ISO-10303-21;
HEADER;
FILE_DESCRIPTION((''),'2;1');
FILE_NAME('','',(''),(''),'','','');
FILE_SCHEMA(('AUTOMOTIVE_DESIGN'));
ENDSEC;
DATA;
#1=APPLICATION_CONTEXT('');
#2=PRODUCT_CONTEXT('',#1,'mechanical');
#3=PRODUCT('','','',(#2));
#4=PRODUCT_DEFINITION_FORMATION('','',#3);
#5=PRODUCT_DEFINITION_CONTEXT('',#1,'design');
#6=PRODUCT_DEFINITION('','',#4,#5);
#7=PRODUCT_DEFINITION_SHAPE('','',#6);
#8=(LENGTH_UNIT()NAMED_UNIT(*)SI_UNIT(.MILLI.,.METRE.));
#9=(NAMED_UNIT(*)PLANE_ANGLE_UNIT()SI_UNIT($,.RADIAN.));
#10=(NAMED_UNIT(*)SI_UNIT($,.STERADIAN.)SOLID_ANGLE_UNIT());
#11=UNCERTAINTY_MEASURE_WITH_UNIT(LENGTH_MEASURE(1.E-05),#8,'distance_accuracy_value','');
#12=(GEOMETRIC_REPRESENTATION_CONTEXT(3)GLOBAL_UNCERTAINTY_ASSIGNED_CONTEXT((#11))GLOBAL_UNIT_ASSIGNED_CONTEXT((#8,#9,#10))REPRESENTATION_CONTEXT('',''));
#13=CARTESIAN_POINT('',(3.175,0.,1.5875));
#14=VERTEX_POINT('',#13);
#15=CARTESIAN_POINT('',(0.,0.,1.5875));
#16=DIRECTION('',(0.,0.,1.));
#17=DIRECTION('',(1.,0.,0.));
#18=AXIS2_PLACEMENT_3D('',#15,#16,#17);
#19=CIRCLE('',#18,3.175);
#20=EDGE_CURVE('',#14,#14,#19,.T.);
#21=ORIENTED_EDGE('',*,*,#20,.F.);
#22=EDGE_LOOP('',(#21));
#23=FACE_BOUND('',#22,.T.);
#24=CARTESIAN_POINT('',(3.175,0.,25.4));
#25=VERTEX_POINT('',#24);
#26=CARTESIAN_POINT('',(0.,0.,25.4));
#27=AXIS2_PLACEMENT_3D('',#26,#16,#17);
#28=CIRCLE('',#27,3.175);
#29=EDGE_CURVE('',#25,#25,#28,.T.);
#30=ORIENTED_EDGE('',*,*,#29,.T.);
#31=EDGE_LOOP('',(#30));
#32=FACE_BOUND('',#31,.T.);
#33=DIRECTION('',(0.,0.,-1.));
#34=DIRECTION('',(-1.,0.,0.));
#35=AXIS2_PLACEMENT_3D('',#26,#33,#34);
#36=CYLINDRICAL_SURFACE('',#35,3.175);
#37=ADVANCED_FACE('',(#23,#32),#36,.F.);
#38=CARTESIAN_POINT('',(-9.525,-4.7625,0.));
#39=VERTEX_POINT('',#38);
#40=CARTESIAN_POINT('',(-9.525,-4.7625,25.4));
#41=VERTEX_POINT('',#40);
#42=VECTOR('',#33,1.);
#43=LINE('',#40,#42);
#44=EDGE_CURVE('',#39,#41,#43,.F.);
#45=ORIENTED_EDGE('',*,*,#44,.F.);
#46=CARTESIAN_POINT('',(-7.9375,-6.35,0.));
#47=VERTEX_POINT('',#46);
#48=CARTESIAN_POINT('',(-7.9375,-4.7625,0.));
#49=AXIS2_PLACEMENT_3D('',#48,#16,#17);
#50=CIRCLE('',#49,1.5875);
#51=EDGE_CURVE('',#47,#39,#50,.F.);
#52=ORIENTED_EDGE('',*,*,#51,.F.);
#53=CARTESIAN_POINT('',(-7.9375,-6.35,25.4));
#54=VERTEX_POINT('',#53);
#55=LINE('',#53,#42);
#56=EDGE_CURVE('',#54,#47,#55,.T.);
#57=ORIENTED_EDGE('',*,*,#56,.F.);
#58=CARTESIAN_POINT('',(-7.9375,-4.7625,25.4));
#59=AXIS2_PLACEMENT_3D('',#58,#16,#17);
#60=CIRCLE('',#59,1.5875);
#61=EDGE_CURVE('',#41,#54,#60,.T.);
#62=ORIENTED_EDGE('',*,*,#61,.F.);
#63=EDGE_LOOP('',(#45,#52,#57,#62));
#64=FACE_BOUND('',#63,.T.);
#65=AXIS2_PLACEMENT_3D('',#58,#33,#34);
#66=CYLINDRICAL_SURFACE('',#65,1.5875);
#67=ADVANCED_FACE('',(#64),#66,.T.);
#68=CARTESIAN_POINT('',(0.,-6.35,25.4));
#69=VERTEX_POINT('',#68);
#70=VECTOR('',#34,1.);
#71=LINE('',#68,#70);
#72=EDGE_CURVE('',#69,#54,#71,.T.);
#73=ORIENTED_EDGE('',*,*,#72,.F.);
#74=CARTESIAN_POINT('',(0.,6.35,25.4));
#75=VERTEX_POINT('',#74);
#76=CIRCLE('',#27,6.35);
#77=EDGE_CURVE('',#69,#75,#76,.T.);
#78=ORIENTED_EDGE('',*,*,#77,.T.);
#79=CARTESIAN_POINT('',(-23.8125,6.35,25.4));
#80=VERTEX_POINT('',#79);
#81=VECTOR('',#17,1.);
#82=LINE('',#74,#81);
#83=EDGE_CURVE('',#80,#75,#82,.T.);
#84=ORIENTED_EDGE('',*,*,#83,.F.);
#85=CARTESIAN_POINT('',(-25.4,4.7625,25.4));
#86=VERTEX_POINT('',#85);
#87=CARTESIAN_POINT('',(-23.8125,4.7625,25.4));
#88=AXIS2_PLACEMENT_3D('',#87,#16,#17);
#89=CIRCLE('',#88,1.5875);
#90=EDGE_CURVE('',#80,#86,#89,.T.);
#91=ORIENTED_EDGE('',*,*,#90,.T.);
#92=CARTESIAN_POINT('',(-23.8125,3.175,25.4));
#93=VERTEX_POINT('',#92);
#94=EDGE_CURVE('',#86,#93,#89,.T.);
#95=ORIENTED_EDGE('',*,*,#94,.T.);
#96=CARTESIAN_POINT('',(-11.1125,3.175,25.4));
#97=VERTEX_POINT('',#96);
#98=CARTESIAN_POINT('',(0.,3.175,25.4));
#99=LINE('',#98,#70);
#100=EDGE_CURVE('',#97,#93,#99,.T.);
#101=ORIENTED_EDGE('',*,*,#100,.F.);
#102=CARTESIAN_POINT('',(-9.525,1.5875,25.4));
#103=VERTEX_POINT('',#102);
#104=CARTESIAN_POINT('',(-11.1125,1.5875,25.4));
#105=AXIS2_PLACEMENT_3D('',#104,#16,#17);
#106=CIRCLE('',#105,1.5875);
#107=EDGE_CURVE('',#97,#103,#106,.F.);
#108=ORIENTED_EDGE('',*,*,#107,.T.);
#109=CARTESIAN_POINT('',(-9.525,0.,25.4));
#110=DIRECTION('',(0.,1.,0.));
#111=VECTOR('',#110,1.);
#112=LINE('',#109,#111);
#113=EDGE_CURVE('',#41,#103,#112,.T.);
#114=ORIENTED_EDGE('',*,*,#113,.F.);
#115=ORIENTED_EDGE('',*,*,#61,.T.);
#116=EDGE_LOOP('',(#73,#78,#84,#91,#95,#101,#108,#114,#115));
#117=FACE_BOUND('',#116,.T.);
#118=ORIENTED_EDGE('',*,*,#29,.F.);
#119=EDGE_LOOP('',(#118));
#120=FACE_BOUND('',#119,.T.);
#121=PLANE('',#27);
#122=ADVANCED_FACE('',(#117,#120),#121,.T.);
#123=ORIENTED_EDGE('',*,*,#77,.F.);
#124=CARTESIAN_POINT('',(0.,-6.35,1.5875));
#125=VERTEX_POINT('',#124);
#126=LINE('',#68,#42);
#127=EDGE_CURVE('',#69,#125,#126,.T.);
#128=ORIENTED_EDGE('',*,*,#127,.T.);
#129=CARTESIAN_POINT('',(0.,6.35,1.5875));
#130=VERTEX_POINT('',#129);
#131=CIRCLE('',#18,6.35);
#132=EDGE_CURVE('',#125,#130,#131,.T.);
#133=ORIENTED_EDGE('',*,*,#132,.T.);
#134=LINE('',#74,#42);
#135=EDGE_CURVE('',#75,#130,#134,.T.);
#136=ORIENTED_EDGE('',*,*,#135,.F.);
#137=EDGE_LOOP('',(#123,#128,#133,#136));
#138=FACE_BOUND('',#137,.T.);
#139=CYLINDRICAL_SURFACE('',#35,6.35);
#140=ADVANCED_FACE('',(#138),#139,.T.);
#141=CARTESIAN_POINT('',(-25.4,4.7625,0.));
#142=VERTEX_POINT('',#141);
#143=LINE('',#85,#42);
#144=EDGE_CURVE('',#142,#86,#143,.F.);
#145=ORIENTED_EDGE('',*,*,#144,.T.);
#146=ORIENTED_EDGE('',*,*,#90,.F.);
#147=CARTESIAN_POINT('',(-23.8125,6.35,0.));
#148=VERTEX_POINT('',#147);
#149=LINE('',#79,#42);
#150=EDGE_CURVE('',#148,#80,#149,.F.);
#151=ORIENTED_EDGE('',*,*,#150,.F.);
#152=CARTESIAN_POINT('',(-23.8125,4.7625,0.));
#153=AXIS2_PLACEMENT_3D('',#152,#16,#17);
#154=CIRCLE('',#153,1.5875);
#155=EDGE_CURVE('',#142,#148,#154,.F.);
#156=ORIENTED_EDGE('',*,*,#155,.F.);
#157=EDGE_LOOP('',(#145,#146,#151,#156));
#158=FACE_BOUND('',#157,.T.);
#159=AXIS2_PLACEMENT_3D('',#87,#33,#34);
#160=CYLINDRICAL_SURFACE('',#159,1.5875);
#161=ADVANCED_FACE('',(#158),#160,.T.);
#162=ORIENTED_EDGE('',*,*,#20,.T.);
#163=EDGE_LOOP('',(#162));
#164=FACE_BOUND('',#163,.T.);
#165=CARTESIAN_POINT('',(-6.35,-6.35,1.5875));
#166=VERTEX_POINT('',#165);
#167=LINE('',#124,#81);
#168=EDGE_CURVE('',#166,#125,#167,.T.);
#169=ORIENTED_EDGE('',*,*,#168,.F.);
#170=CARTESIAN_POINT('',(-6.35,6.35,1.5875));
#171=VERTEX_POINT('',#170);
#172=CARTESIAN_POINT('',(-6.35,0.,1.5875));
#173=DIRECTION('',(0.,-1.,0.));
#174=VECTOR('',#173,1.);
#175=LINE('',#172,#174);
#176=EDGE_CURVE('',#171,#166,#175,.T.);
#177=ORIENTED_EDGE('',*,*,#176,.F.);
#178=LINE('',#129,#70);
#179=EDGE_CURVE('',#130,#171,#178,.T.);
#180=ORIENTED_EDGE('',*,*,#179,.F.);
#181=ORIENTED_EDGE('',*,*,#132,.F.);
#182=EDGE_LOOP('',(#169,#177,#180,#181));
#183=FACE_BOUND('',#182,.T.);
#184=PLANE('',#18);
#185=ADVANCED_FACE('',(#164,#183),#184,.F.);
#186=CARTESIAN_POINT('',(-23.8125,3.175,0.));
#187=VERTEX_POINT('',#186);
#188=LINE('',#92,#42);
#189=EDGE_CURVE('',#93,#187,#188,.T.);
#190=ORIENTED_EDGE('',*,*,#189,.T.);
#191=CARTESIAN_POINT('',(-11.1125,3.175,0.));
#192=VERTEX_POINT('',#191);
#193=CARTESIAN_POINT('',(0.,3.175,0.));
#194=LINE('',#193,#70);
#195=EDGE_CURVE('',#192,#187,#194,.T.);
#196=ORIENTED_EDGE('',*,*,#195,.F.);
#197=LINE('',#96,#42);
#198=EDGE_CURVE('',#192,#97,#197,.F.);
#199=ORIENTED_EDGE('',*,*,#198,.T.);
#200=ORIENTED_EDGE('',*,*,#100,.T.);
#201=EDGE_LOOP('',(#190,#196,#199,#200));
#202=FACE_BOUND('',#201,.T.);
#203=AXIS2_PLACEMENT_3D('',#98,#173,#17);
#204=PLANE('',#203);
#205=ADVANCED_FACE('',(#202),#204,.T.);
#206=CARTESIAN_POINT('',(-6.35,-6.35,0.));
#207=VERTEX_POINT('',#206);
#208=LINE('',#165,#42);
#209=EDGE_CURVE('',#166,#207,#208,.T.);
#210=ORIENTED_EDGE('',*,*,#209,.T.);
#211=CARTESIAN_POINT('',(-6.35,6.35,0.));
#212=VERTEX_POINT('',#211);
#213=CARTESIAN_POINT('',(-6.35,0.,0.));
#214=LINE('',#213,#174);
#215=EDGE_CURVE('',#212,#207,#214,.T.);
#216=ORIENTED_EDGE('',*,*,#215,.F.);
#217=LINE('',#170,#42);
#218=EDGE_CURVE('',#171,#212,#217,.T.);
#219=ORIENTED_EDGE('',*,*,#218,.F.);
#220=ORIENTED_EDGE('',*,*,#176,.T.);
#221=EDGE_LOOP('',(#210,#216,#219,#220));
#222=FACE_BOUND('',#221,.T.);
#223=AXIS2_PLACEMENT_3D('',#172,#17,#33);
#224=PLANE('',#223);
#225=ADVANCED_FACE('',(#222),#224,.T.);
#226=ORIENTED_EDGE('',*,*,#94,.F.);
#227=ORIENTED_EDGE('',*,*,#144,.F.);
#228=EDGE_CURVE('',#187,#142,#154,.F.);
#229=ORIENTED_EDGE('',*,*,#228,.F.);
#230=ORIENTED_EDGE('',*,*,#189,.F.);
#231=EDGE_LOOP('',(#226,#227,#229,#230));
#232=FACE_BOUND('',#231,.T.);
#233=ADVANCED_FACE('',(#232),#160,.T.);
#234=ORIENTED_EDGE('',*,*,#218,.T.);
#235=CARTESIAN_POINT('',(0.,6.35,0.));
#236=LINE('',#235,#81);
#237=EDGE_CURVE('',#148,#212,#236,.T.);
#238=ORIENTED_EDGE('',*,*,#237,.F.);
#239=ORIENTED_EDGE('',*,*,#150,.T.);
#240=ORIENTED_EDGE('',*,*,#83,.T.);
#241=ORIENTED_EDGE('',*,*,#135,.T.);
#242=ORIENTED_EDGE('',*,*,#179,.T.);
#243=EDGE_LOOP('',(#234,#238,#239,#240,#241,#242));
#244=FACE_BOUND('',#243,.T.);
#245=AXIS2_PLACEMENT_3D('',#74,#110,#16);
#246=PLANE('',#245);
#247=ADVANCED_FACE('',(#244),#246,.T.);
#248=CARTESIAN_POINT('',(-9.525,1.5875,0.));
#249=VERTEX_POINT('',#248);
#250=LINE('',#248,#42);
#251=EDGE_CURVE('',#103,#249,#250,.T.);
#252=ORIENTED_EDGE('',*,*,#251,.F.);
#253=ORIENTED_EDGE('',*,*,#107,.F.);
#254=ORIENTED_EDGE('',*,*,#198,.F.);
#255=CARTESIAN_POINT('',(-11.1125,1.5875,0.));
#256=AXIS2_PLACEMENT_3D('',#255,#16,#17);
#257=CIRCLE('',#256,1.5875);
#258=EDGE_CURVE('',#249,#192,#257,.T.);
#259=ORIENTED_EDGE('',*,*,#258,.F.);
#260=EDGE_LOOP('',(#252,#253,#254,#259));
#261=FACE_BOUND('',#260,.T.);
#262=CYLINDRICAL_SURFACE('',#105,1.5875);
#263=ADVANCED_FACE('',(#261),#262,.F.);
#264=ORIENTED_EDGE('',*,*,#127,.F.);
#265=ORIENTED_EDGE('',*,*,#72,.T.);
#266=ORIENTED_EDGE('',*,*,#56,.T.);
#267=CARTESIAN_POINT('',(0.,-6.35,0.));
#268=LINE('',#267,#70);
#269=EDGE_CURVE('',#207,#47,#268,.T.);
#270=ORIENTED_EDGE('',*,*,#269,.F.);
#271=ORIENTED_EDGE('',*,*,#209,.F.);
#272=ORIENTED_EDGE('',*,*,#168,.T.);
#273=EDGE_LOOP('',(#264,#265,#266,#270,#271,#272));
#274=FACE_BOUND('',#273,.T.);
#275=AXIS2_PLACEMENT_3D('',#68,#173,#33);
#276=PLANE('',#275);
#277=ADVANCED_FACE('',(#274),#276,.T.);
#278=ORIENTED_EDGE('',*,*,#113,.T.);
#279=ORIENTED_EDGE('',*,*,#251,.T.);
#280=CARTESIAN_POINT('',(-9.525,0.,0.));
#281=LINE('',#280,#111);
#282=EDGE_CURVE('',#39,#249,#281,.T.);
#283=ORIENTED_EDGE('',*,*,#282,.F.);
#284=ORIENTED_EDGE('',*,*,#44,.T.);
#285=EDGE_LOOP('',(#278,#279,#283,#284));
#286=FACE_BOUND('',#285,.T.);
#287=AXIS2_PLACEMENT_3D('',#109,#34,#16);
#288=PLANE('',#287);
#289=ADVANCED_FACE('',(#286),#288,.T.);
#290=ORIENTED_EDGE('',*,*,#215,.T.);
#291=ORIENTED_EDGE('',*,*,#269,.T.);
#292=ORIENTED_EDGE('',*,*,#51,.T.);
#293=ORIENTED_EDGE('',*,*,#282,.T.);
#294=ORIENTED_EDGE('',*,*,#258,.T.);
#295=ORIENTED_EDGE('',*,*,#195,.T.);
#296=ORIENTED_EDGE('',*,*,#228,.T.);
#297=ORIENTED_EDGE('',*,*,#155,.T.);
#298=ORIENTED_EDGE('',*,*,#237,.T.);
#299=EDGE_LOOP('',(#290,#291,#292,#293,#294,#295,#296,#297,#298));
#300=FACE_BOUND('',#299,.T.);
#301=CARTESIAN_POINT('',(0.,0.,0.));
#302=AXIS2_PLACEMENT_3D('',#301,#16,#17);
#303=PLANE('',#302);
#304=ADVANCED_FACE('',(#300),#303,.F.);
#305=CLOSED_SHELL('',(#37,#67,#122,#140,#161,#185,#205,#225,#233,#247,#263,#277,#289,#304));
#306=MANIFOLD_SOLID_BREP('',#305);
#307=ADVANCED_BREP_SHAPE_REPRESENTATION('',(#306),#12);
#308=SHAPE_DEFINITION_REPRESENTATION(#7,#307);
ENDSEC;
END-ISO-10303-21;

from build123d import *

# Parameters (mm, degrees)
SKETCH1_R           = 3.175
BOSS_EXTRUDE1_DEPTH = 25.4
CUT_EXTRUDE1_START  = -25.4
SKETCH2_W           = 12.7
SKETCH2_H           = 12.7
CUT_EXTRUDE1_DEPTH  = 1.5875
FILLET1_R           = 1.5875


with BuildPart() as part:
    # Sketch1 → Boss-Extrude1 (new body)
    with BuildSketch(Plane.XY):
        with BuildLine():
            Line((-25.4, 3.175), (-9.525, 3.175))
            Line((-9.525, 3.175), (-9.525, -6.35))
            Line((-9.525, -6.35), (0, -6.35))
            ThreePointArc((0, -6.35), (6.35, 0), (0, 6.35))
            Line((0, 6.35), (-25.4, 6.35))
            Line((-25.4, 6.35), (-25.4, 3.175))
        make_face()
        Circle(SKETCH1_R, mode=Mode.SUBTRACT)
    extrude(amount=BOSS_EXTRUDE1_DEPTH)

    # Sketch2 → Cut-Extrude1 (cut)
    with BuildSketch(Plane.XY.offset(25.4).offset(CUT_EXTRUDE1_START)):
        Rectangle(SKETCH2_W, SKETCH2_H)
    extrude(amount=CUT_EXTRUDE1_DEPTH, mode=Mode.SUBTRACT)

    # Fillet1
    fillet1_edges = [part.edges().sort_by_distance(p)[0] for p in [
        (-9.525, -6.35, 12.7),
        (-9.525, 3.175, 12.7),
        (-25.4, 6.35, 12.7),
        (-25.4, 3.175, 12.7),
    ]]
    fillet(fillet1_edges, radius=FILLET1_R - 0.0001)  # a hair under: the kernel refuses the full size


solid = part.part
